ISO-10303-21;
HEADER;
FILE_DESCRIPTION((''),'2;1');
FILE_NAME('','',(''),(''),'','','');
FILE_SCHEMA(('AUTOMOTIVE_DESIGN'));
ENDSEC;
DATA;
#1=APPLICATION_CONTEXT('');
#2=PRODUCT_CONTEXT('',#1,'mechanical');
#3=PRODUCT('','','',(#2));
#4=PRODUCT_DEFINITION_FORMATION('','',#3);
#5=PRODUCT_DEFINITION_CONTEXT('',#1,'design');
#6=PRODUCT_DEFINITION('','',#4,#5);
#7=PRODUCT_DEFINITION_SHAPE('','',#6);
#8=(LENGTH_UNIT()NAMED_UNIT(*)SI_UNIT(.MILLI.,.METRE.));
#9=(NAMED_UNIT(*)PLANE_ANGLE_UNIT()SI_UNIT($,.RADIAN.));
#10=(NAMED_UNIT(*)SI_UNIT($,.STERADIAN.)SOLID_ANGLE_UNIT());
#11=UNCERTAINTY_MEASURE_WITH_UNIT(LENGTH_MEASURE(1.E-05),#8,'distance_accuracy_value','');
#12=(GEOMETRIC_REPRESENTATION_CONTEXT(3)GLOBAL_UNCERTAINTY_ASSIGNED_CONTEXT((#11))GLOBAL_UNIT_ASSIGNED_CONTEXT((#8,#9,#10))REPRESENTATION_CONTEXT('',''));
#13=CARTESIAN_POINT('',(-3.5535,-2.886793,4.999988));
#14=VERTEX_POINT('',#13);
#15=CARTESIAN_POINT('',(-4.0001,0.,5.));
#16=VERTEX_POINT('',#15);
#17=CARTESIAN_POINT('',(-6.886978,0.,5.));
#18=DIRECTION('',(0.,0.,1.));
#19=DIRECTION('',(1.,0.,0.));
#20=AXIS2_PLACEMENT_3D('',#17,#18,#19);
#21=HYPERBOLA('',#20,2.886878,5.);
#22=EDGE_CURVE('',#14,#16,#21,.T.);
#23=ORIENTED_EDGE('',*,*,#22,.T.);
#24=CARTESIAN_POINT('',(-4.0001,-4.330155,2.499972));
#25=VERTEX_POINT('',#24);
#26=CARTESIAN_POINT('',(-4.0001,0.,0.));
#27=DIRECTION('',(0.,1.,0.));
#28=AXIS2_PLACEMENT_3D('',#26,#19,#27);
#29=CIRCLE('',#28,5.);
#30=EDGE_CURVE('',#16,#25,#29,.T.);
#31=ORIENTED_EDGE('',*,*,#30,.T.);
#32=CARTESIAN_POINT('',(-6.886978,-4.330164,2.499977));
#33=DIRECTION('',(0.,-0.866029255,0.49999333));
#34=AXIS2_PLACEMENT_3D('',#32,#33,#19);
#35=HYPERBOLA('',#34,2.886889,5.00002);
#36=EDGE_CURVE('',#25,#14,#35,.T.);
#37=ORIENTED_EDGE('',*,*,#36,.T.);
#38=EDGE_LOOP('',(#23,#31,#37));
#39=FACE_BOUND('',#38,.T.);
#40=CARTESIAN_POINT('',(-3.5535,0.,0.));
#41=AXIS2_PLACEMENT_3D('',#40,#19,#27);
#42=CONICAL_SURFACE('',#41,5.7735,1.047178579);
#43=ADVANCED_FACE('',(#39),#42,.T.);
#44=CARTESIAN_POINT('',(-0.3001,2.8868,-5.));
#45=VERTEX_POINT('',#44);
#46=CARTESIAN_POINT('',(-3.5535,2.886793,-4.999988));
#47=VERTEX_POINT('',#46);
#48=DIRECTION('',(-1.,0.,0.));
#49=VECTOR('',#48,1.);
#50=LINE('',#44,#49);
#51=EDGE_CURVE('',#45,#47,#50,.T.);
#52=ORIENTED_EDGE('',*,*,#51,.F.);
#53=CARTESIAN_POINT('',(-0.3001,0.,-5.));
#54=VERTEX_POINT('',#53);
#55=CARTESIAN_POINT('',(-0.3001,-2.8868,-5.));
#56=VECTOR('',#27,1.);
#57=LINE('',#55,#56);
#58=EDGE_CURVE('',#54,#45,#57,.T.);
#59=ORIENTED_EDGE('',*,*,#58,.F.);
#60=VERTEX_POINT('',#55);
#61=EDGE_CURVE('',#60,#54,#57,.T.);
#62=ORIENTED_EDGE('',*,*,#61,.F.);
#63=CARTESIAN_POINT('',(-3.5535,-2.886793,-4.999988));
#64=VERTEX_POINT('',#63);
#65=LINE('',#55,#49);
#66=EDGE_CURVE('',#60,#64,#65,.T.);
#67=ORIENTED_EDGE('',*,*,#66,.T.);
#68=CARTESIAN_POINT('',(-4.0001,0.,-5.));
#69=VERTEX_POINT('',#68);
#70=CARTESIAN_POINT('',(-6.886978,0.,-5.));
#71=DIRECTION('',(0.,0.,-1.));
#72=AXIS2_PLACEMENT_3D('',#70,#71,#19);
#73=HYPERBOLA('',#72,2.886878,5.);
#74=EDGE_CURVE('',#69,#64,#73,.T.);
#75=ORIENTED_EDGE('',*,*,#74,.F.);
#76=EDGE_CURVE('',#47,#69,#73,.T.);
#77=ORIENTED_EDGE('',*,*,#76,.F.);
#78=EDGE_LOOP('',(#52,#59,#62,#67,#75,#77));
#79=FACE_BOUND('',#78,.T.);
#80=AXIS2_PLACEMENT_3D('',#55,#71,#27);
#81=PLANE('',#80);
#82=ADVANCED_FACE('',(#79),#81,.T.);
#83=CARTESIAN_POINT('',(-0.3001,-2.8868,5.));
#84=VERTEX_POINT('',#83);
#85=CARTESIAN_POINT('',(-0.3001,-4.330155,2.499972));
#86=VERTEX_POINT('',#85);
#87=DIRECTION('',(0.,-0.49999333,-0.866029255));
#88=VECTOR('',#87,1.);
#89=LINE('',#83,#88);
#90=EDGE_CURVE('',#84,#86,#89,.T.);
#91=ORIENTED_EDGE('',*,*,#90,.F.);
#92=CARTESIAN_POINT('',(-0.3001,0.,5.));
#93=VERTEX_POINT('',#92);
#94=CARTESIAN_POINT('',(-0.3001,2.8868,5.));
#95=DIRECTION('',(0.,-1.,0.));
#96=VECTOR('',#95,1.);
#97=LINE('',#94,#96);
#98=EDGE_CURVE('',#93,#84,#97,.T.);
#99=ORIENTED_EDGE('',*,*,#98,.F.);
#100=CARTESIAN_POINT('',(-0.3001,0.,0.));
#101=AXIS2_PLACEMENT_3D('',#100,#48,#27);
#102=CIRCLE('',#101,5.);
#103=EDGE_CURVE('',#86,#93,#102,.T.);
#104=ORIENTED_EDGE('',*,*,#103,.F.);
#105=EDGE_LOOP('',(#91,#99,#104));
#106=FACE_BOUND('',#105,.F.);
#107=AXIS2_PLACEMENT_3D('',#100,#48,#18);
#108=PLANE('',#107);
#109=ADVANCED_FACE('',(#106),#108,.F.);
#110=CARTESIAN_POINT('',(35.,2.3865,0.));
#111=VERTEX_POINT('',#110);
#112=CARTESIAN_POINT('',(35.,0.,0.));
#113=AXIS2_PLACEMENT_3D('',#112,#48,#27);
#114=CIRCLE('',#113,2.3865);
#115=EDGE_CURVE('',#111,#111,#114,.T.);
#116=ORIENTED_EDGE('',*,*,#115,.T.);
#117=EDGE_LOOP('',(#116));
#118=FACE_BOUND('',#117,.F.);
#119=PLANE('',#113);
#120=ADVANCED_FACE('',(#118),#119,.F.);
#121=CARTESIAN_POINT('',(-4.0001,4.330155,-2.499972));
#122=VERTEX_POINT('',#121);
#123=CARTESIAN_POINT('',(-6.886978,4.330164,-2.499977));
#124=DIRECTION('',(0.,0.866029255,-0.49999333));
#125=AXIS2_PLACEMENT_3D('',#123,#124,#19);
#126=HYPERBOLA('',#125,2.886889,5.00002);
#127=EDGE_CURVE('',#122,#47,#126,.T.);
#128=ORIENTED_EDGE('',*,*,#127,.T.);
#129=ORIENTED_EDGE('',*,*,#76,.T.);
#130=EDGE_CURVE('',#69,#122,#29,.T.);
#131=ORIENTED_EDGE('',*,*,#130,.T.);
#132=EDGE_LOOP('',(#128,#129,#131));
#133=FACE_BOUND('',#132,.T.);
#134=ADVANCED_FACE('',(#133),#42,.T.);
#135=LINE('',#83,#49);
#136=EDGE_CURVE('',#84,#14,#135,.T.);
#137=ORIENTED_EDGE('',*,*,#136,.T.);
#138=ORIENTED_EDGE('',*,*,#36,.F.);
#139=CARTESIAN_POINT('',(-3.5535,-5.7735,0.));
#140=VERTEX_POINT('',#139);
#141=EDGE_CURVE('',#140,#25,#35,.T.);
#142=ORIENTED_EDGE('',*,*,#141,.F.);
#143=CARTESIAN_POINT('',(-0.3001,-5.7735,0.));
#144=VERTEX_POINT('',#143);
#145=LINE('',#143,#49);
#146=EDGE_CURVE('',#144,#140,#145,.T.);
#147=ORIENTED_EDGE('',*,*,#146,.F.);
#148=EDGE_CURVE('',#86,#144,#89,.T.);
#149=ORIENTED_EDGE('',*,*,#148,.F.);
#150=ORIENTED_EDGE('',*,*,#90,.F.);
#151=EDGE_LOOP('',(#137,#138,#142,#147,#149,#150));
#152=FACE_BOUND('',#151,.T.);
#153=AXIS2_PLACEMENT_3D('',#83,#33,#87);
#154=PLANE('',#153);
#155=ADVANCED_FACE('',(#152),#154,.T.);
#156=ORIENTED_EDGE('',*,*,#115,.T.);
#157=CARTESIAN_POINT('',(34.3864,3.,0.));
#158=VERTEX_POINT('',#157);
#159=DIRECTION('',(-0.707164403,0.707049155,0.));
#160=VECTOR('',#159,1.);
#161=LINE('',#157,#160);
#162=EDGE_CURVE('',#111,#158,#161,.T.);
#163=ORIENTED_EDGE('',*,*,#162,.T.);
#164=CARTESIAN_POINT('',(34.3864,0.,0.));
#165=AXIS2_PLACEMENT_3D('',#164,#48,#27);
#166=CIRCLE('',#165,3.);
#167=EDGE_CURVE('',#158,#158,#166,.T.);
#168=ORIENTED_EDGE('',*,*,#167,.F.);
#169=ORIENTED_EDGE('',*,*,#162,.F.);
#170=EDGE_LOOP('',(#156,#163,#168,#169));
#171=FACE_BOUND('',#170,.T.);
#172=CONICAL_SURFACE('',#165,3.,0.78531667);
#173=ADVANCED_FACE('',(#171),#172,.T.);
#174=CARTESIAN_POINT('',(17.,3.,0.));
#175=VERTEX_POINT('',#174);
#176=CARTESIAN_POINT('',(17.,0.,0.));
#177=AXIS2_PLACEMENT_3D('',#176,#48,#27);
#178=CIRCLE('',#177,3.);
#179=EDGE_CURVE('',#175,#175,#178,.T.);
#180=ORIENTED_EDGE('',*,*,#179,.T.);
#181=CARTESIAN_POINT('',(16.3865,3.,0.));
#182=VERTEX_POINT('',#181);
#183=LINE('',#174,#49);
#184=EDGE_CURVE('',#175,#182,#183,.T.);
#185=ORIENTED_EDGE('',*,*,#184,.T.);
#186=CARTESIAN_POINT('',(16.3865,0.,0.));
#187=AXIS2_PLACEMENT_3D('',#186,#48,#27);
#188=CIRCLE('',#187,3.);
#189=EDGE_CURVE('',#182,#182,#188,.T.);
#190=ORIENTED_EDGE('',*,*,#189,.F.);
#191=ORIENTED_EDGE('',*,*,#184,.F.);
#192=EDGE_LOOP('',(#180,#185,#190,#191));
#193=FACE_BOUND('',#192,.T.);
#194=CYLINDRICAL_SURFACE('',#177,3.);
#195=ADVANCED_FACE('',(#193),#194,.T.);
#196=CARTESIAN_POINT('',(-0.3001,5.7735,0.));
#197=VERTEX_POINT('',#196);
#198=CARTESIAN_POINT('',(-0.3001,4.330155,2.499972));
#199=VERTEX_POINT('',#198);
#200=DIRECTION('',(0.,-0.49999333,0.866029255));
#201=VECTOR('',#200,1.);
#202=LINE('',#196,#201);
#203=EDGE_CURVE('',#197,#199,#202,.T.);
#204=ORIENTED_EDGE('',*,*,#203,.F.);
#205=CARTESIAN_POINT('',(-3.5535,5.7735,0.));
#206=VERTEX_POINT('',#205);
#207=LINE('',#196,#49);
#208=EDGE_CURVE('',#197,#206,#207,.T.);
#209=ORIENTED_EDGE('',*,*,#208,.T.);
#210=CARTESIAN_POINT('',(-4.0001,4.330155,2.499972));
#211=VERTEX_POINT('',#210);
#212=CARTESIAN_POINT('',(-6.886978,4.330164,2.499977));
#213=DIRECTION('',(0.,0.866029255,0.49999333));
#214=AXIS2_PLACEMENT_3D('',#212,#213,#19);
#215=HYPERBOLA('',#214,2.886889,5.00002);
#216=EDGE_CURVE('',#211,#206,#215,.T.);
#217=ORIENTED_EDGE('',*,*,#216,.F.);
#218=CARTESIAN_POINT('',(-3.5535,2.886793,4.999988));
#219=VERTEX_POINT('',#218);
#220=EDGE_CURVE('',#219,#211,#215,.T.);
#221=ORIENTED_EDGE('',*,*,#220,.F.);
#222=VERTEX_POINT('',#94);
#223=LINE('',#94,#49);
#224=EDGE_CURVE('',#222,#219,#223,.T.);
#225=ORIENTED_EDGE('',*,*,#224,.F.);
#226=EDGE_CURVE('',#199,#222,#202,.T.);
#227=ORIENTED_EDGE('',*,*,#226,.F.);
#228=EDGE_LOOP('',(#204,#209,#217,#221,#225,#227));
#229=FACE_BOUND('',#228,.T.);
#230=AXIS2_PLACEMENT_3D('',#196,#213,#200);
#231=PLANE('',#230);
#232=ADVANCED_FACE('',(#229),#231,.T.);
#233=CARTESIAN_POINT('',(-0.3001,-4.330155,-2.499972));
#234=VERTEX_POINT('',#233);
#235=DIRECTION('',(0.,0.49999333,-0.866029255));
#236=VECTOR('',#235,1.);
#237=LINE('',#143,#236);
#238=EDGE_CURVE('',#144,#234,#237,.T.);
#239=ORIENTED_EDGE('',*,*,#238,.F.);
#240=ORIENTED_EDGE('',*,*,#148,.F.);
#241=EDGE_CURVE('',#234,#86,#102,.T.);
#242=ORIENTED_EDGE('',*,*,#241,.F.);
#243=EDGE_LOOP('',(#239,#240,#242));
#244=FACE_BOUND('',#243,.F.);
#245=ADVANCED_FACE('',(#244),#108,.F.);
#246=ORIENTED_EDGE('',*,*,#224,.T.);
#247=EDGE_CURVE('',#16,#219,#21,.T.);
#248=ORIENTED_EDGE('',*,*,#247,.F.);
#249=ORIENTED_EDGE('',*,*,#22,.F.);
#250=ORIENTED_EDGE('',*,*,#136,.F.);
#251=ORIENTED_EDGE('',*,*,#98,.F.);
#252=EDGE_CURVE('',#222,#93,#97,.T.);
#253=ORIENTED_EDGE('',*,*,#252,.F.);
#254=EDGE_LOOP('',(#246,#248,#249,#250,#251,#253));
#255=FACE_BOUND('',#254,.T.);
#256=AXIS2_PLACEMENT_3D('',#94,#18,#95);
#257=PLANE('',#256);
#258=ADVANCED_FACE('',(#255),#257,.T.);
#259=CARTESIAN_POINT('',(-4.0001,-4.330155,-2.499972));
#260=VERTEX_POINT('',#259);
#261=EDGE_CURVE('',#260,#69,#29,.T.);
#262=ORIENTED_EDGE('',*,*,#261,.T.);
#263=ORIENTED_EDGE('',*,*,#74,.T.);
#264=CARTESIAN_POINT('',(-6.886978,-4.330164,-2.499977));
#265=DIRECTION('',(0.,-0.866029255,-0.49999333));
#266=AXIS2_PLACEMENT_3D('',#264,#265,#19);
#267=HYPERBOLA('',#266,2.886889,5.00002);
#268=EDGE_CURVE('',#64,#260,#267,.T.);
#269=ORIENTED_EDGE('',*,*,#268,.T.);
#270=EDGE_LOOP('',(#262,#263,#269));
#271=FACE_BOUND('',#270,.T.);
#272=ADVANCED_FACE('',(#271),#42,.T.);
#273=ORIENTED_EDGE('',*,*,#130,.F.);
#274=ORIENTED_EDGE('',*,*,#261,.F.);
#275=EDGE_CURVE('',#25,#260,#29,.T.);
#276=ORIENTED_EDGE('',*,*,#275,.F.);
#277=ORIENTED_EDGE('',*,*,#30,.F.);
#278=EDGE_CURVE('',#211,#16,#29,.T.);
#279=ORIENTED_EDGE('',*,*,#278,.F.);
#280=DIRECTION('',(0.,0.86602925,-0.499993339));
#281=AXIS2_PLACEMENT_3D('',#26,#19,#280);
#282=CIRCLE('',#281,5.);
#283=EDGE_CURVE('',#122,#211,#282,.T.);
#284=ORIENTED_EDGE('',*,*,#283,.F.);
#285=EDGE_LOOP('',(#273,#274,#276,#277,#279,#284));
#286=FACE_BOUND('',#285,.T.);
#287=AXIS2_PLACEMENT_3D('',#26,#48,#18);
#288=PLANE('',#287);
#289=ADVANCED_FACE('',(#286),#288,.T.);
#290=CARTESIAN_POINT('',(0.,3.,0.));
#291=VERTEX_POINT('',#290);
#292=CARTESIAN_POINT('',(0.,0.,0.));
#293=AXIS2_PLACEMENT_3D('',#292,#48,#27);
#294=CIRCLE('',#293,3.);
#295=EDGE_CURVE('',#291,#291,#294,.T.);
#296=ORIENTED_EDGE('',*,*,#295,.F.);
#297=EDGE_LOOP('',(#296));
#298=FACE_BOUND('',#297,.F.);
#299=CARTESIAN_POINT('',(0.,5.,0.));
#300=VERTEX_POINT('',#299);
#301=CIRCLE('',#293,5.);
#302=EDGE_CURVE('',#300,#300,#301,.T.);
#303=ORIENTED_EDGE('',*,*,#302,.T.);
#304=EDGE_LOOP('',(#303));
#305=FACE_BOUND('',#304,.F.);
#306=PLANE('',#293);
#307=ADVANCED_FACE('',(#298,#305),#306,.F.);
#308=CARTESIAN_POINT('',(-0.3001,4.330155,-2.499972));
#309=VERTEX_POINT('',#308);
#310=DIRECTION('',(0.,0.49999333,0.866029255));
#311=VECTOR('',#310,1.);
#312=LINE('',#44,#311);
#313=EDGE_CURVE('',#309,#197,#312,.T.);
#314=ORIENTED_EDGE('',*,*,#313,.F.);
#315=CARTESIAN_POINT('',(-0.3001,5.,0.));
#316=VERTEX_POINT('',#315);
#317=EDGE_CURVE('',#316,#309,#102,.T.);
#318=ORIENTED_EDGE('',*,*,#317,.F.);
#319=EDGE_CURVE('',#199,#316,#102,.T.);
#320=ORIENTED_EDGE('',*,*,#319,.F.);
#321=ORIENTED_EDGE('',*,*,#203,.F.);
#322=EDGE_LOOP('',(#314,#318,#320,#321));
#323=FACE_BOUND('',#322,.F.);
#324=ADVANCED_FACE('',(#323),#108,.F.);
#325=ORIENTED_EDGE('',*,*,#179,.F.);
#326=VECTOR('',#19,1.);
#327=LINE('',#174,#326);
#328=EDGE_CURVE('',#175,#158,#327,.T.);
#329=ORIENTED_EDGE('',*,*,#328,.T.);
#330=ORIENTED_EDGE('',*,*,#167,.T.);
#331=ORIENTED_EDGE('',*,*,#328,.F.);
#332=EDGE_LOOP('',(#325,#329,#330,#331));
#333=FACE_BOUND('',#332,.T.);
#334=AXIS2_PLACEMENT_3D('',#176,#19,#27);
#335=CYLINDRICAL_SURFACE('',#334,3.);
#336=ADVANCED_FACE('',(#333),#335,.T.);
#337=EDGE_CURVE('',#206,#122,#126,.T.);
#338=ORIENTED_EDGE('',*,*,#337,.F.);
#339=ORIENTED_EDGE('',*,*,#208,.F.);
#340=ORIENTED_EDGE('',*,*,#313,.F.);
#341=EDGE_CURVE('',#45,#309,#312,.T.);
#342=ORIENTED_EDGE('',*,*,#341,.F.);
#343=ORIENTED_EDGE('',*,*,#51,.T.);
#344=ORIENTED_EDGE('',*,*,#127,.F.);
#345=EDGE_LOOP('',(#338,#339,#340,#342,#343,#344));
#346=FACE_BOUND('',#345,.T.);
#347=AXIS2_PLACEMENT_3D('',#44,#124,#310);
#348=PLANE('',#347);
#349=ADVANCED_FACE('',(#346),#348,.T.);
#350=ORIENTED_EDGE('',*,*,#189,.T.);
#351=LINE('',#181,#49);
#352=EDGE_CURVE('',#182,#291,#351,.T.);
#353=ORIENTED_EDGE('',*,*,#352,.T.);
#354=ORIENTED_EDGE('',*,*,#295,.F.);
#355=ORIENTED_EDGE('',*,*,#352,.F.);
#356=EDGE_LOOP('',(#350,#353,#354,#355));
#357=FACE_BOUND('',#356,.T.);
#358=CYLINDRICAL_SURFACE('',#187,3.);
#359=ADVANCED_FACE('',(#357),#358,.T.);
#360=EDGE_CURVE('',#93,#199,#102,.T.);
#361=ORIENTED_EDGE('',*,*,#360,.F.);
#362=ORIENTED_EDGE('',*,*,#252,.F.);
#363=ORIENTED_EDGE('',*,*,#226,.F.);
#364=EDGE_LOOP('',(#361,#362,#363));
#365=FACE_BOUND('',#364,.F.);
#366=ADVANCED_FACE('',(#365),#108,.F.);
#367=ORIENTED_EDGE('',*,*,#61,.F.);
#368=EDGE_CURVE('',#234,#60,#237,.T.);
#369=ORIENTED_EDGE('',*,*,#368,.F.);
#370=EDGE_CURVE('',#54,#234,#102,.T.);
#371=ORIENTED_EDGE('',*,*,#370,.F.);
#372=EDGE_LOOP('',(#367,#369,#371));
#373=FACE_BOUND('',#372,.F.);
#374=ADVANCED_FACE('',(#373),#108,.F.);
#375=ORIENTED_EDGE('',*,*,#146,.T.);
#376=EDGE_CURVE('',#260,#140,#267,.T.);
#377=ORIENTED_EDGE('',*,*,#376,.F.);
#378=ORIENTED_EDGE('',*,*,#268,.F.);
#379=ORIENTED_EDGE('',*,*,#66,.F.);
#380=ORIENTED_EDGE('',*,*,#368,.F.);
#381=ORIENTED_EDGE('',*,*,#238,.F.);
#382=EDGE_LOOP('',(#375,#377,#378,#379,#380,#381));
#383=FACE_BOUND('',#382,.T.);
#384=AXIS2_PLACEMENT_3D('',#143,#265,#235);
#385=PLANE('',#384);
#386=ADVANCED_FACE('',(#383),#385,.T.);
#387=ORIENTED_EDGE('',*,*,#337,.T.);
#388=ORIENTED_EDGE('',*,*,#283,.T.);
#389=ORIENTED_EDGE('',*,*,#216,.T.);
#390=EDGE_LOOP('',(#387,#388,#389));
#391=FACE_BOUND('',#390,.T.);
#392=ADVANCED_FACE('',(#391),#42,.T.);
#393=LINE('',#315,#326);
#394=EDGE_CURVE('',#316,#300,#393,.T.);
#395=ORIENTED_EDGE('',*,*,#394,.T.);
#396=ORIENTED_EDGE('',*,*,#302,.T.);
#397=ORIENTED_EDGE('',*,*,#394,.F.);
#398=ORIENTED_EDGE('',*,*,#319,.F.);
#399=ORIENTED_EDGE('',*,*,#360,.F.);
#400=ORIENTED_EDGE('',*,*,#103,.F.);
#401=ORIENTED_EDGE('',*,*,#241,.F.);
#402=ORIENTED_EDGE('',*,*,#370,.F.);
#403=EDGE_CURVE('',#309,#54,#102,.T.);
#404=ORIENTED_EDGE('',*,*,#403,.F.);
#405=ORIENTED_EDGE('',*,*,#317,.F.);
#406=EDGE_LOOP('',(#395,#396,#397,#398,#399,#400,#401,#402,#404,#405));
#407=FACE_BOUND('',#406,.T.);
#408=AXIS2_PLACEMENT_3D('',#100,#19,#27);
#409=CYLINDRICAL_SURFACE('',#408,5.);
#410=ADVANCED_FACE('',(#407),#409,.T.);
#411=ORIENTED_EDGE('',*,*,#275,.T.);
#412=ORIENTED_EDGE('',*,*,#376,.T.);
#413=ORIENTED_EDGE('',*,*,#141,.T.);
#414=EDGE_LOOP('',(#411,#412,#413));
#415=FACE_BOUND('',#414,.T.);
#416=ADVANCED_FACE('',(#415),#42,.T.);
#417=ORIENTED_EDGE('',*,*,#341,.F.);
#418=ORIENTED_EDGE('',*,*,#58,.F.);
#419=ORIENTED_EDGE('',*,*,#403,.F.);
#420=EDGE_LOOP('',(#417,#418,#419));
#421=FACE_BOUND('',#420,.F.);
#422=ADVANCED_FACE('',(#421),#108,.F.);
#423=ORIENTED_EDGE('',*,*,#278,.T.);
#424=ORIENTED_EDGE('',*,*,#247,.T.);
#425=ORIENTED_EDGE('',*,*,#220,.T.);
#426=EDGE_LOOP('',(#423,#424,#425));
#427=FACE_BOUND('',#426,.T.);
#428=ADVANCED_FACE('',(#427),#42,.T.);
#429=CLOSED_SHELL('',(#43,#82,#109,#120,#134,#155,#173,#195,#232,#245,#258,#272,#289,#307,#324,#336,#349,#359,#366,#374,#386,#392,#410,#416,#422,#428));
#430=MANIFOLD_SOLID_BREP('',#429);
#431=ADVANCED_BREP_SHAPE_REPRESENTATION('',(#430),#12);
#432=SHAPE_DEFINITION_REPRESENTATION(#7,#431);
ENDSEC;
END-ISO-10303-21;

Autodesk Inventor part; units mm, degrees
ref_plane "YZ Plane" through (0, 0, 0) normal (1, 0, 0) x (0, 1, 0)
ref_plane "XZ Plane" through (0, 0, 0) normal (0, 1, 0) x (-1, 0, 0)
sketch "Sketch1" plane through (0, 0, 0) normal (0, 0, 1) x (1, 0, 0)
  line L0 (0, 5) -> (0, 3)
  line L1 (17, 3) -> (35, 3)
  line L2 (35, 3) -> (35, 0)
  line L3 (35, 0) -> (-0.3001, 0)
  line L4 (-7.3601, 0) -> (42.06, 0) projected
  line L5 (-0.3001, 0) -> (-0.3001, 5)
  line L6 (-0.3001, 5) -> (0, 5)
  line L7 (17, 3) -> (16.3865, 3)
  line L8 (16.3865, 3) -> (0, 3)
  line L9 (0, -1) -> (0, 6) projected
  dimension "d0" = 35
  dimension "d1" = 18
  dimension "d2" = 6
  dimension "d9" = 0.3001
  dimension "d10" = 10
  dimension "d13" = 0.6136
  dimension "d14" = 6
revolve "Body" add sketch "Sketch1" angle 360 about axis through (35, 0, 0) along (-1, 0, 0)
sketch "Sketch2" plane through (-0.3001, 0, 0) normal (-1, 0, 0) x (0, 0, 1)
  line L0 (0, 5.7735) -> (5, 2.8868)
  line L1 (5, 2.8868) -> (5, -2.8868)
  line L2 (5, -2.8868) -> (0, -5.7735)
  line L3 (0, -5.7735) -> (-5, -2.8868)
  line L4 (-5, -2.8868) -> (-5, 2.8868)
  line L5 (-5, 2.8868) -> (0, 5.7735)
  point P0 (0, 0)
  point P1 (0, 0)
  dimension "d11" = 10
extrude "Head" add sketch "Sketch2" along normal blind 3.7
sketch "Sketch4" plane through (0, 0, 0) normal (0, 0, 1) x (1, 0, 0)
  line L0 (-4.0001, 5) -> (-4.0001, 5.7735)
  line L1 (-4.0001, 5.7735) -> (-3.5535, 5.7735)
  line L2 (-3.5535, 5.7735) -> (-4.0001, 5)
  line L3 (-4.7401, 0) -> (0.4399, 0) projected
  line L4 (-0.3001, 5.7735) -> (-4.0001, 5.7735) projected
  line L5 (-4.0001, 2.8868) -> (-4.0001, 5.7735) projected
  dimension "d5" = 30
  dimension "d19" = 10
revolve "Chamfer1" cut sketch "Sketch4" angle 360 about axis through (-10, 0, 0) along (1, 0, 0)
thread "Thread" size "M6x1" class "6g" standard "ISO Metric profile" length 18
chamfer "Chamfer2" distance 0.6135 distance2 0.6136 1 edges at (35, -3, 0) measured on face at (35, 0.7485, -0.6631)
ref_plane "Work Plane1" through (1.525, 0, 0) normal (0, 0, 1) x (1, 0, 0)
equation "\"d11\" = SW"
equation "\"d3\" = KOH - SD"
equation "\"d15\" = GEL"
equation "\"d6\" = -0.5 * SPD + 0.5 * GD"
equation "\"d0\" = NLG"
equation "\"d1\" = GEL"
equation "\"d2\" = GD"
equation "\"d10\" = SD2"
equation "\"d14\" = BDM"
equation "\"d5\" = ANG1"
equation "\"d19\" = SW0"
equation "\"NLG\" = 35"
equation "\"GD\" = NND"
equation "\"BDM\" = NND"
equation "\"KOH\" = 4"
equation "\"GEL\" = 18"
equation "\"SW\" = 10"
equation "\"SW0\" = SW"
equation "\"SPD\" = NND - 1.2269 * PTC"
equation "\"SD2\" = SW"
equation "\"SD\" = WFT"
equation "\"ANG1\" = 30deg"
equation "\"GAL\" = 0.61345 * PTC"
equation "\"GUL\" = 0.61345 * PTC"
equation "\"RR\" = 0.25"
equation "\"WFT\" = 0.3"
equation "\"GD1\" = THREADDIA - 1.2269 * PTC"
equation "\"THREADDIA\" = 6"
equation "\"TOA\" = 30deg"
equation "\"PTC\" = 1"
equation "\"NND\" = 6"
equation "\"E0\" = 1.155 * SW"
properties part number "CNS 3121 - M6 x 35" material "Steel, Mild"
